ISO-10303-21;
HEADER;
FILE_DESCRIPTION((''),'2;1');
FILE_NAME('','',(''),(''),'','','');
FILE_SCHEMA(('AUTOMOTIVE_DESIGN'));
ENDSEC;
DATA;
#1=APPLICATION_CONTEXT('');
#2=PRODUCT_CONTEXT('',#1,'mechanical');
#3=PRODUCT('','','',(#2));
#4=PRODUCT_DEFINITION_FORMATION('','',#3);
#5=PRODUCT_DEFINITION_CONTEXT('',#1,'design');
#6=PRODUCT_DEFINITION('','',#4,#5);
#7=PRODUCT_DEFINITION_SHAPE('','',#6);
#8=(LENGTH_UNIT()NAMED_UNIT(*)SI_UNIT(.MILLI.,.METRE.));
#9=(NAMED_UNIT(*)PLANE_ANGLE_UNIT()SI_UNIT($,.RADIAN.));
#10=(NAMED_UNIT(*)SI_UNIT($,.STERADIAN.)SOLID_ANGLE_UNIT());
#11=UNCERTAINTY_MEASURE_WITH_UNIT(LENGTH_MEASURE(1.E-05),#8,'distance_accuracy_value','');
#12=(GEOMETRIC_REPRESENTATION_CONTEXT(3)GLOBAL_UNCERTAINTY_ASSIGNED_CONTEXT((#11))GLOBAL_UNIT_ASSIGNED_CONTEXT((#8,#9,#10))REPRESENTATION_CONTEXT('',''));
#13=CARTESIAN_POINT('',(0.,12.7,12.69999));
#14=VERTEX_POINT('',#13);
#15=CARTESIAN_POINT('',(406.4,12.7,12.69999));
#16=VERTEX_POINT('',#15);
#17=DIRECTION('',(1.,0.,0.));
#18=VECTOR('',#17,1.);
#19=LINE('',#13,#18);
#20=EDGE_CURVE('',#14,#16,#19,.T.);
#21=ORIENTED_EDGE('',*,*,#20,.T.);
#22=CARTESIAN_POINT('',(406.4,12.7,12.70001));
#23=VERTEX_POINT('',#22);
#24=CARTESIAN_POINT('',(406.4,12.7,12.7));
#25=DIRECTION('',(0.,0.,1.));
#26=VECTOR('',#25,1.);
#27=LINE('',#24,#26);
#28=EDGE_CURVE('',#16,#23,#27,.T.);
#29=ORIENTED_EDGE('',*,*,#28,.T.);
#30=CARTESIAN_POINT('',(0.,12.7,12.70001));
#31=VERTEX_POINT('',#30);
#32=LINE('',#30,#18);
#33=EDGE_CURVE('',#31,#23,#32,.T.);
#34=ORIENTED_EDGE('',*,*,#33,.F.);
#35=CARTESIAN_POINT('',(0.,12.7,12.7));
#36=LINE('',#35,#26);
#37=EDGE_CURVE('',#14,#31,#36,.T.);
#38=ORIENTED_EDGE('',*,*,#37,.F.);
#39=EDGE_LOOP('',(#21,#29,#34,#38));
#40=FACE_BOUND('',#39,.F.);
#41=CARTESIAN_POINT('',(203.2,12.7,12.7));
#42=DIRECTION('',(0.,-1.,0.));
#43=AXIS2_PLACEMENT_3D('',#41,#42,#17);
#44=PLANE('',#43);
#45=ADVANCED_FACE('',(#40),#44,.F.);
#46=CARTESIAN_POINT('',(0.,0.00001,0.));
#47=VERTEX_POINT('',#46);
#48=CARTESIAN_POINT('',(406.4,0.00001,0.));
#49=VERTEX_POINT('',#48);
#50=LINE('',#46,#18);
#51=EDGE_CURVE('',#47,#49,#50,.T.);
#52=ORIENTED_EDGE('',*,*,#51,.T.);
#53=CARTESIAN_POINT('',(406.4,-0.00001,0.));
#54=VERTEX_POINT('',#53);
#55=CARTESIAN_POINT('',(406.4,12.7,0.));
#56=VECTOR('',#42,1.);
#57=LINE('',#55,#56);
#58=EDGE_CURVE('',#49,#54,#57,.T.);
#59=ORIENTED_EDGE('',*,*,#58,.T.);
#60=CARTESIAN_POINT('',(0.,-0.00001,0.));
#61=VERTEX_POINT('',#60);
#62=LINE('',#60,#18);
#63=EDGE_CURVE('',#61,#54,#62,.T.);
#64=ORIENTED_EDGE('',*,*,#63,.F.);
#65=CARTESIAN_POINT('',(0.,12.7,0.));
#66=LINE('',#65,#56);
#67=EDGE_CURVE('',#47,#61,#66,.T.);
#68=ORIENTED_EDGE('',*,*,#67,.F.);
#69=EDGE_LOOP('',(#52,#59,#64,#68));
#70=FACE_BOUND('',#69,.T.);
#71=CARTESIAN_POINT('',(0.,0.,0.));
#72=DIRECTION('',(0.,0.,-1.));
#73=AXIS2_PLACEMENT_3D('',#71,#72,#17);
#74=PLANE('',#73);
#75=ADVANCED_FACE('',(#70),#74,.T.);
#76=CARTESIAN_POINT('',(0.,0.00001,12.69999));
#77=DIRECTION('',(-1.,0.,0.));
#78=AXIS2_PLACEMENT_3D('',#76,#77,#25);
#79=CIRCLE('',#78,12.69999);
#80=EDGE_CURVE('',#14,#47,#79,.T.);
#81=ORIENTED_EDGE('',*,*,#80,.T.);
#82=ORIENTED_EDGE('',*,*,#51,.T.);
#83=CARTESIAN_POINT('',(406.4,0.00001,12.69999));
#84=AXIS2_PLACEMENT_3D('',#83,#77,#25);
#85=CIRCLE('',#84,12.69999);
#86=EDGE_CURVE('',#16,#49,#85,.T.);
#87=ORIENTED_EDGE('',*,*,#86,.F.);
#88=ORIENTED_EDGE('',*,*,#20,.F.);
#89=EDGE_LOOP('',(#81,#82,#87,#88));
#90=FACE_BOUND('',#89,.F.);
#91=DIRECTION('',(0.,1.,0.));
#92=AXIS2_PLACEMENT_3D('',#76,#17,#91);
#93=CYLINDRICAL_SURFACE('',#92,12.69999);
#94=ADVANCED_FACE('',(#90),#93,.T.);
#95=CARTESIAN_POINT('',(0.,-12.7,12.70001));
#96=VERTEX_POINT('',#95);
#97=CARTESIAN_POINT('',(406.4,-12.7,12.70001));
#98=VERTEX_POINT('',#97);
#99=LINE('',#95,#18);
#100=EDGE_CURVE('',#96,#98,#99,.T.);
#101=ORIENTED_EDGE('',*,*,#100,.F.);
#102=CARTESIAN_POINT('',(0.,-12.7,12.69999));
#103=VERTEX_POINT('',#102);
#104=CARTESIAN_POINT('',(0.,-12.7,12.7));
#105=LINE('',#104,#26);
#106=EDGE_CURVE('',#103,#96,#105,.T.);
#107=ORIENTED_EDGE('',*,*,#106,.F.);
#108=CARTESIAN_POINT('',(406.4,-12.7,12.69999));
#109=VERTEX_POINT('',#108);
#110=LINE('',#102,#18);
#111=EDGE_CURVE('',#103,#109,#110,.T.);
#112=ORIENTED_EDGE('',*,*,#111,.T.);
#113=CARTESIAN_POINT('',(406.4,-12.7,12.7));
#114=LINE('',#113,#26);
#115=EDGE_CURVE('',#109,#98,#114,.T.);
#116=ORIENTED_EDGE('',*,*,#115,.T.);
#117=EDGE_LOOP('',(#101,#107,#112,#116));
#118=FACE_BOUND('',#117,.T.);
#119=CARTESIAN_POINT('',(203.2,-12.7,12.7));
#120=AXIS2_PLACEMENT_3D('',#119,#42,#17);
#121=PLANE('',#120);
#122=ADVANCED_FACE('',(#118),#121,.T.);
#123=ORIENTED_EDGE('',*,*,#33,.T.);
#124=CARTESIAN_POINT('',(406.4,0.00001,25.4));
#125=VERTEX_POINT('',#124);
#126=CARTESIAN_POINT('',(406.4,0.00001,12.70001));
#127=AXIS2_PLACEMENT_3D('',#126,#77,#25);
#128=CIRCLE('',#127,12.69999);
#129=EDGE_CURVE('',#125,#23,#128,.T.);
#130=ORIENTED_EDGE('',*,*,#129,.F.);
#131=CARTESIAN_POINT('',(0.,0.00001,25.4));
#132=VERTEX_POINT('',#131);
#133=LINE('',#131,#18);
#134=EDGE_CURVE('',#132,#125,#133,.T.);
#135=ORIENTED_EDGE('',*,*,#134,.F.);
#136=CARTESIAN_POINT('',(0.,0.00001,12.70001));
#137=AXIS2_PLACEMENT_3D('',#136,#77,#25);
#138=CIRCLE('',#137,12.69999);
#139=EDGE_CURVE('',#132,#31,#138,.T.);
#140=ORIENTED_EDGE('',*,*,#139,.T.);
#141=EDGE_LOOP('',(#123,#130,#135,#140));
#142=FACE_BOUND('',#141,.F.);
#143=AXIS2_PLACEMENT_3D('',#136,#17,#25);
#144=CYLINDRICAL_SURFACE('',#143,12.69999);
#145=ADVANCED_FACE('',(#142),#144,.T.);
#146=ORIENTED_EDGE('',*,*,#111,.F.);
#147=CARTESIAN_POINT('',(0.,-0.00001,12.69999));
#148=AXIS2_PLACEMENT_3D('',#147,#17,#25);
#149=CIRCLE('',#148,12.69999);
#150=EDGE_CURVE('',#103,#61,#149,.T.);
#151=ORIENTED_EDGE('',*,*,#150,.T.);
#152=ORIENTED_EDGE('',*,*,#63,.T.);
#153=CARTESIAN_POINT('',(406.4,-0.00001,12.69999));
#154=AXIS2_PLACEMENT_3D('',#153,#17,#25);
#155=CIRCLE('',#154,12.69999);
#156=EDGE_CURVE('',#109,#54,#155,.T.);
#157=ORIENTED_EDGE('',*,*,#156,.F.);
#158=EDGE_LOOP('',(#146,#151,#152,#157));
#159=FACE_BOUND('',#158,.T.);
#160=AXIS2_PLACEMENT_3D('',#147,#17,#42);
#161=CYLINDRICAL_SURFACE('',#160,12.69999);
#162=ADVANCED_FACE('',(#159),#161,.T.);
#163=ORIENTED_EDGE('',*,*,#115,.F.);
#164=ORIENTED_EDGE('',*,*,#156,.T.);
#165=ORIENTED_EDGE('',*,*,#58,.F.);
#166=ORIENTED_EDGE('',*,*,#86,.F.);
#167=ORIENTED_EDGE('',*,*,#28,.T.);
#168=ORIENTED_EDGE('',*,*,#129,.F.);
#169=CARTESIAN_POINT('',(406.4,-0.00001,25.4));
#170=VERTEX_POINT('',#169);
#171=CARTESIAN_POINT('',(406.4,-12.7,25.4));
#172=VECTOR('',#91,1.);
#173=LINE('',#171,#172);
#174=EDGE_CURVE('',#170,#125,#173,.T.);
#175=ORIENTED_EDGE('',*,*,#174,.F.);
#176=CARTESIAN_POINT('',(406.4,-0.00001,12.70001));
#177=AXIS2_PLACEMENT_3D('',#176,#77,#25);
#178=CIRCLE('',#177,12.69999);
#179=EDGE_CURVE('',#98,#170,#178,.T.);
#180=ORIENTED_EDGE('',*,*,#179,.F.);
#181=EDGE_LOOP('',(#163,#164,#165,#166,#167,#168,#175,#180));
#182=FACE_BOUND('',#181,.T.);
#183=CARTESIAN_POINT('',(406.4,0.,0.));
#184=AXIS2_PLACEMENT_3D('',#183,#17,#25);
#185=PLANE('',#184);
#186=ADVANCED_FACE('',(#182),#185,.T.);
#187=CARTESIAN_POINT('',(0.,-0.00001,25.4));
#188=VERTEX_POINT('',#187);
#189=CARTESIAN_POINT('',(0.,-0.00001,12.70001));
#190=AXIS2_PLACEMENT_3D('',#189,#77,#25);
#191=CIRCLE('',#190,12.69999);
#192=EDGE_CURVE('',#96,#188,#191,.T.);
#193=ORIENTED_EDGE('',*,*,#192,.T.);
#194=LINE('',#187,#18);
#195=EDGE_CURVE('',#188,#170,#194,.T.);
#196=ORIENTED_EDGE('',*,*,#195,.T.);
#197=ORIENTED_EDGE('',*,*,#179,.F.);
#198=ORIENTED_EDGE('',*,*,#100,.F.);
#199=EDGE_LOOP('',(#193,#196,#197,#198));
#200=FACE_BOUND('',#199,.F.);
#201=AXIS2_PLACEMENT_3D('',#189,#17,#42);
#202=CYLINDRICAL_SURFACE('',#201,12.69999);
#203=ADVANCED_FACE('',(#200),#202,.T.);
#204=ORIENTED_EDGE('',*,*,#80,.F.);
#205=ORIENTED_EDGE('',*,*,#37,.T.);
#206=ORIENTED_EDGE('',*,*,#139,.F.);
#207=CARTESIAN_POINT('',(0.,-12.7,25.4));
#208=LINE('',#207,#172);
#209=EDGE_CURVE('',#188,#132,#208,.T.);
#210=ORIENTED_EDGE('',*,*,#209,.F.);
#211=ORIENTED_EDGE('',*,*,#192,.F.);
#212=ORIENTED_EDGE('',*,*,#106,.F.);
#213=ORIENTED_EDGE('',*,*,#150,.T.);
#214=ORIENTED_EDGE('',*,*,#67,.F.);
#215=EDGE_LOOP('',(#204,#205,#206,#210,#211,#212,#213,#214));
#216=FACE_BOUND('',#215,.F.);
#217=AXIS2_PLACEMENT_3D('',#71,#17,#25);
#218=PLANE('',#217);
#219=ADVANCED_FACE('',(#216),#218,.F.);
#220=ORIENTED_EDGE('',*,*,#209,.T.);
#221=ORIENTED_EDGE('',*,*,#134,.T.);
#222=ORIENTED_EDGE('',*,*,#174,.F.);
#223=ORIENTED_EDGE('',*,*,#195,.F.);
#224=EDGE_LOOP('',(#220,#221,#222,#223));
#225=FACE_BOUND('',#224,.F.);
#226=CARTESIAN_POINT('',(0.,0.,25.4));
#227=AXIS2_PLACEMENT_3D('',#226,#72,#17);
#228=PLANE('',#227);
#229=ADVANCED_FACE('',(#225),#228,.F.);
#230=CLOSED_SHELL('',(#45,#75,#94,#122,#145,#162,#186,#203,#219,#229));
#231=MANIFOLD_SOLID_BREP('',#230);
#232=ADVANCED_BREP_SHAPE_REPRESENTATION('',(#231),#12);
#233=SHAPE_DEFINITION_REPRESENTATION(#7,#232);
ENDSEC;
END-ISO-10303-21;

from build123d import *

# Parameters (mm, degrees)
F0_W     = 406.4
F0_H     = 25.4
F1_DEPTH = 12.7
F2_R     = 12.69999


# Not quite as in the source:
# - a fillet or chamfer is up to 0.001 mm smaller than in the source, because OpenCascade refuses the exact size


with BuildPart() as f1:
    # F0 (on Front) → F1 (new body, symmetric)
    with BuildSketch(Plane.XZ):
        with Locations((203.2, 12.7)):
            Rectangle(F0_W, F0_H)
    extrude(amount=F1_DEPTH, both=True)

    # F2 (radius 12.7 in the source; OpenCascade refuses exactly that, so slightly less here)
    f2_edges = [f1.edges().sort_by_distance(p)[0] for p in [
        (203.2, -12.7, 0),
        (203.2, -12.7, 25.4),
        (203.2, 12.7, 25.4),
        (203.2, 12.7, 0),
    ]]
    fillet(f2_edges, radius=F2_R)


solid = f1.part
